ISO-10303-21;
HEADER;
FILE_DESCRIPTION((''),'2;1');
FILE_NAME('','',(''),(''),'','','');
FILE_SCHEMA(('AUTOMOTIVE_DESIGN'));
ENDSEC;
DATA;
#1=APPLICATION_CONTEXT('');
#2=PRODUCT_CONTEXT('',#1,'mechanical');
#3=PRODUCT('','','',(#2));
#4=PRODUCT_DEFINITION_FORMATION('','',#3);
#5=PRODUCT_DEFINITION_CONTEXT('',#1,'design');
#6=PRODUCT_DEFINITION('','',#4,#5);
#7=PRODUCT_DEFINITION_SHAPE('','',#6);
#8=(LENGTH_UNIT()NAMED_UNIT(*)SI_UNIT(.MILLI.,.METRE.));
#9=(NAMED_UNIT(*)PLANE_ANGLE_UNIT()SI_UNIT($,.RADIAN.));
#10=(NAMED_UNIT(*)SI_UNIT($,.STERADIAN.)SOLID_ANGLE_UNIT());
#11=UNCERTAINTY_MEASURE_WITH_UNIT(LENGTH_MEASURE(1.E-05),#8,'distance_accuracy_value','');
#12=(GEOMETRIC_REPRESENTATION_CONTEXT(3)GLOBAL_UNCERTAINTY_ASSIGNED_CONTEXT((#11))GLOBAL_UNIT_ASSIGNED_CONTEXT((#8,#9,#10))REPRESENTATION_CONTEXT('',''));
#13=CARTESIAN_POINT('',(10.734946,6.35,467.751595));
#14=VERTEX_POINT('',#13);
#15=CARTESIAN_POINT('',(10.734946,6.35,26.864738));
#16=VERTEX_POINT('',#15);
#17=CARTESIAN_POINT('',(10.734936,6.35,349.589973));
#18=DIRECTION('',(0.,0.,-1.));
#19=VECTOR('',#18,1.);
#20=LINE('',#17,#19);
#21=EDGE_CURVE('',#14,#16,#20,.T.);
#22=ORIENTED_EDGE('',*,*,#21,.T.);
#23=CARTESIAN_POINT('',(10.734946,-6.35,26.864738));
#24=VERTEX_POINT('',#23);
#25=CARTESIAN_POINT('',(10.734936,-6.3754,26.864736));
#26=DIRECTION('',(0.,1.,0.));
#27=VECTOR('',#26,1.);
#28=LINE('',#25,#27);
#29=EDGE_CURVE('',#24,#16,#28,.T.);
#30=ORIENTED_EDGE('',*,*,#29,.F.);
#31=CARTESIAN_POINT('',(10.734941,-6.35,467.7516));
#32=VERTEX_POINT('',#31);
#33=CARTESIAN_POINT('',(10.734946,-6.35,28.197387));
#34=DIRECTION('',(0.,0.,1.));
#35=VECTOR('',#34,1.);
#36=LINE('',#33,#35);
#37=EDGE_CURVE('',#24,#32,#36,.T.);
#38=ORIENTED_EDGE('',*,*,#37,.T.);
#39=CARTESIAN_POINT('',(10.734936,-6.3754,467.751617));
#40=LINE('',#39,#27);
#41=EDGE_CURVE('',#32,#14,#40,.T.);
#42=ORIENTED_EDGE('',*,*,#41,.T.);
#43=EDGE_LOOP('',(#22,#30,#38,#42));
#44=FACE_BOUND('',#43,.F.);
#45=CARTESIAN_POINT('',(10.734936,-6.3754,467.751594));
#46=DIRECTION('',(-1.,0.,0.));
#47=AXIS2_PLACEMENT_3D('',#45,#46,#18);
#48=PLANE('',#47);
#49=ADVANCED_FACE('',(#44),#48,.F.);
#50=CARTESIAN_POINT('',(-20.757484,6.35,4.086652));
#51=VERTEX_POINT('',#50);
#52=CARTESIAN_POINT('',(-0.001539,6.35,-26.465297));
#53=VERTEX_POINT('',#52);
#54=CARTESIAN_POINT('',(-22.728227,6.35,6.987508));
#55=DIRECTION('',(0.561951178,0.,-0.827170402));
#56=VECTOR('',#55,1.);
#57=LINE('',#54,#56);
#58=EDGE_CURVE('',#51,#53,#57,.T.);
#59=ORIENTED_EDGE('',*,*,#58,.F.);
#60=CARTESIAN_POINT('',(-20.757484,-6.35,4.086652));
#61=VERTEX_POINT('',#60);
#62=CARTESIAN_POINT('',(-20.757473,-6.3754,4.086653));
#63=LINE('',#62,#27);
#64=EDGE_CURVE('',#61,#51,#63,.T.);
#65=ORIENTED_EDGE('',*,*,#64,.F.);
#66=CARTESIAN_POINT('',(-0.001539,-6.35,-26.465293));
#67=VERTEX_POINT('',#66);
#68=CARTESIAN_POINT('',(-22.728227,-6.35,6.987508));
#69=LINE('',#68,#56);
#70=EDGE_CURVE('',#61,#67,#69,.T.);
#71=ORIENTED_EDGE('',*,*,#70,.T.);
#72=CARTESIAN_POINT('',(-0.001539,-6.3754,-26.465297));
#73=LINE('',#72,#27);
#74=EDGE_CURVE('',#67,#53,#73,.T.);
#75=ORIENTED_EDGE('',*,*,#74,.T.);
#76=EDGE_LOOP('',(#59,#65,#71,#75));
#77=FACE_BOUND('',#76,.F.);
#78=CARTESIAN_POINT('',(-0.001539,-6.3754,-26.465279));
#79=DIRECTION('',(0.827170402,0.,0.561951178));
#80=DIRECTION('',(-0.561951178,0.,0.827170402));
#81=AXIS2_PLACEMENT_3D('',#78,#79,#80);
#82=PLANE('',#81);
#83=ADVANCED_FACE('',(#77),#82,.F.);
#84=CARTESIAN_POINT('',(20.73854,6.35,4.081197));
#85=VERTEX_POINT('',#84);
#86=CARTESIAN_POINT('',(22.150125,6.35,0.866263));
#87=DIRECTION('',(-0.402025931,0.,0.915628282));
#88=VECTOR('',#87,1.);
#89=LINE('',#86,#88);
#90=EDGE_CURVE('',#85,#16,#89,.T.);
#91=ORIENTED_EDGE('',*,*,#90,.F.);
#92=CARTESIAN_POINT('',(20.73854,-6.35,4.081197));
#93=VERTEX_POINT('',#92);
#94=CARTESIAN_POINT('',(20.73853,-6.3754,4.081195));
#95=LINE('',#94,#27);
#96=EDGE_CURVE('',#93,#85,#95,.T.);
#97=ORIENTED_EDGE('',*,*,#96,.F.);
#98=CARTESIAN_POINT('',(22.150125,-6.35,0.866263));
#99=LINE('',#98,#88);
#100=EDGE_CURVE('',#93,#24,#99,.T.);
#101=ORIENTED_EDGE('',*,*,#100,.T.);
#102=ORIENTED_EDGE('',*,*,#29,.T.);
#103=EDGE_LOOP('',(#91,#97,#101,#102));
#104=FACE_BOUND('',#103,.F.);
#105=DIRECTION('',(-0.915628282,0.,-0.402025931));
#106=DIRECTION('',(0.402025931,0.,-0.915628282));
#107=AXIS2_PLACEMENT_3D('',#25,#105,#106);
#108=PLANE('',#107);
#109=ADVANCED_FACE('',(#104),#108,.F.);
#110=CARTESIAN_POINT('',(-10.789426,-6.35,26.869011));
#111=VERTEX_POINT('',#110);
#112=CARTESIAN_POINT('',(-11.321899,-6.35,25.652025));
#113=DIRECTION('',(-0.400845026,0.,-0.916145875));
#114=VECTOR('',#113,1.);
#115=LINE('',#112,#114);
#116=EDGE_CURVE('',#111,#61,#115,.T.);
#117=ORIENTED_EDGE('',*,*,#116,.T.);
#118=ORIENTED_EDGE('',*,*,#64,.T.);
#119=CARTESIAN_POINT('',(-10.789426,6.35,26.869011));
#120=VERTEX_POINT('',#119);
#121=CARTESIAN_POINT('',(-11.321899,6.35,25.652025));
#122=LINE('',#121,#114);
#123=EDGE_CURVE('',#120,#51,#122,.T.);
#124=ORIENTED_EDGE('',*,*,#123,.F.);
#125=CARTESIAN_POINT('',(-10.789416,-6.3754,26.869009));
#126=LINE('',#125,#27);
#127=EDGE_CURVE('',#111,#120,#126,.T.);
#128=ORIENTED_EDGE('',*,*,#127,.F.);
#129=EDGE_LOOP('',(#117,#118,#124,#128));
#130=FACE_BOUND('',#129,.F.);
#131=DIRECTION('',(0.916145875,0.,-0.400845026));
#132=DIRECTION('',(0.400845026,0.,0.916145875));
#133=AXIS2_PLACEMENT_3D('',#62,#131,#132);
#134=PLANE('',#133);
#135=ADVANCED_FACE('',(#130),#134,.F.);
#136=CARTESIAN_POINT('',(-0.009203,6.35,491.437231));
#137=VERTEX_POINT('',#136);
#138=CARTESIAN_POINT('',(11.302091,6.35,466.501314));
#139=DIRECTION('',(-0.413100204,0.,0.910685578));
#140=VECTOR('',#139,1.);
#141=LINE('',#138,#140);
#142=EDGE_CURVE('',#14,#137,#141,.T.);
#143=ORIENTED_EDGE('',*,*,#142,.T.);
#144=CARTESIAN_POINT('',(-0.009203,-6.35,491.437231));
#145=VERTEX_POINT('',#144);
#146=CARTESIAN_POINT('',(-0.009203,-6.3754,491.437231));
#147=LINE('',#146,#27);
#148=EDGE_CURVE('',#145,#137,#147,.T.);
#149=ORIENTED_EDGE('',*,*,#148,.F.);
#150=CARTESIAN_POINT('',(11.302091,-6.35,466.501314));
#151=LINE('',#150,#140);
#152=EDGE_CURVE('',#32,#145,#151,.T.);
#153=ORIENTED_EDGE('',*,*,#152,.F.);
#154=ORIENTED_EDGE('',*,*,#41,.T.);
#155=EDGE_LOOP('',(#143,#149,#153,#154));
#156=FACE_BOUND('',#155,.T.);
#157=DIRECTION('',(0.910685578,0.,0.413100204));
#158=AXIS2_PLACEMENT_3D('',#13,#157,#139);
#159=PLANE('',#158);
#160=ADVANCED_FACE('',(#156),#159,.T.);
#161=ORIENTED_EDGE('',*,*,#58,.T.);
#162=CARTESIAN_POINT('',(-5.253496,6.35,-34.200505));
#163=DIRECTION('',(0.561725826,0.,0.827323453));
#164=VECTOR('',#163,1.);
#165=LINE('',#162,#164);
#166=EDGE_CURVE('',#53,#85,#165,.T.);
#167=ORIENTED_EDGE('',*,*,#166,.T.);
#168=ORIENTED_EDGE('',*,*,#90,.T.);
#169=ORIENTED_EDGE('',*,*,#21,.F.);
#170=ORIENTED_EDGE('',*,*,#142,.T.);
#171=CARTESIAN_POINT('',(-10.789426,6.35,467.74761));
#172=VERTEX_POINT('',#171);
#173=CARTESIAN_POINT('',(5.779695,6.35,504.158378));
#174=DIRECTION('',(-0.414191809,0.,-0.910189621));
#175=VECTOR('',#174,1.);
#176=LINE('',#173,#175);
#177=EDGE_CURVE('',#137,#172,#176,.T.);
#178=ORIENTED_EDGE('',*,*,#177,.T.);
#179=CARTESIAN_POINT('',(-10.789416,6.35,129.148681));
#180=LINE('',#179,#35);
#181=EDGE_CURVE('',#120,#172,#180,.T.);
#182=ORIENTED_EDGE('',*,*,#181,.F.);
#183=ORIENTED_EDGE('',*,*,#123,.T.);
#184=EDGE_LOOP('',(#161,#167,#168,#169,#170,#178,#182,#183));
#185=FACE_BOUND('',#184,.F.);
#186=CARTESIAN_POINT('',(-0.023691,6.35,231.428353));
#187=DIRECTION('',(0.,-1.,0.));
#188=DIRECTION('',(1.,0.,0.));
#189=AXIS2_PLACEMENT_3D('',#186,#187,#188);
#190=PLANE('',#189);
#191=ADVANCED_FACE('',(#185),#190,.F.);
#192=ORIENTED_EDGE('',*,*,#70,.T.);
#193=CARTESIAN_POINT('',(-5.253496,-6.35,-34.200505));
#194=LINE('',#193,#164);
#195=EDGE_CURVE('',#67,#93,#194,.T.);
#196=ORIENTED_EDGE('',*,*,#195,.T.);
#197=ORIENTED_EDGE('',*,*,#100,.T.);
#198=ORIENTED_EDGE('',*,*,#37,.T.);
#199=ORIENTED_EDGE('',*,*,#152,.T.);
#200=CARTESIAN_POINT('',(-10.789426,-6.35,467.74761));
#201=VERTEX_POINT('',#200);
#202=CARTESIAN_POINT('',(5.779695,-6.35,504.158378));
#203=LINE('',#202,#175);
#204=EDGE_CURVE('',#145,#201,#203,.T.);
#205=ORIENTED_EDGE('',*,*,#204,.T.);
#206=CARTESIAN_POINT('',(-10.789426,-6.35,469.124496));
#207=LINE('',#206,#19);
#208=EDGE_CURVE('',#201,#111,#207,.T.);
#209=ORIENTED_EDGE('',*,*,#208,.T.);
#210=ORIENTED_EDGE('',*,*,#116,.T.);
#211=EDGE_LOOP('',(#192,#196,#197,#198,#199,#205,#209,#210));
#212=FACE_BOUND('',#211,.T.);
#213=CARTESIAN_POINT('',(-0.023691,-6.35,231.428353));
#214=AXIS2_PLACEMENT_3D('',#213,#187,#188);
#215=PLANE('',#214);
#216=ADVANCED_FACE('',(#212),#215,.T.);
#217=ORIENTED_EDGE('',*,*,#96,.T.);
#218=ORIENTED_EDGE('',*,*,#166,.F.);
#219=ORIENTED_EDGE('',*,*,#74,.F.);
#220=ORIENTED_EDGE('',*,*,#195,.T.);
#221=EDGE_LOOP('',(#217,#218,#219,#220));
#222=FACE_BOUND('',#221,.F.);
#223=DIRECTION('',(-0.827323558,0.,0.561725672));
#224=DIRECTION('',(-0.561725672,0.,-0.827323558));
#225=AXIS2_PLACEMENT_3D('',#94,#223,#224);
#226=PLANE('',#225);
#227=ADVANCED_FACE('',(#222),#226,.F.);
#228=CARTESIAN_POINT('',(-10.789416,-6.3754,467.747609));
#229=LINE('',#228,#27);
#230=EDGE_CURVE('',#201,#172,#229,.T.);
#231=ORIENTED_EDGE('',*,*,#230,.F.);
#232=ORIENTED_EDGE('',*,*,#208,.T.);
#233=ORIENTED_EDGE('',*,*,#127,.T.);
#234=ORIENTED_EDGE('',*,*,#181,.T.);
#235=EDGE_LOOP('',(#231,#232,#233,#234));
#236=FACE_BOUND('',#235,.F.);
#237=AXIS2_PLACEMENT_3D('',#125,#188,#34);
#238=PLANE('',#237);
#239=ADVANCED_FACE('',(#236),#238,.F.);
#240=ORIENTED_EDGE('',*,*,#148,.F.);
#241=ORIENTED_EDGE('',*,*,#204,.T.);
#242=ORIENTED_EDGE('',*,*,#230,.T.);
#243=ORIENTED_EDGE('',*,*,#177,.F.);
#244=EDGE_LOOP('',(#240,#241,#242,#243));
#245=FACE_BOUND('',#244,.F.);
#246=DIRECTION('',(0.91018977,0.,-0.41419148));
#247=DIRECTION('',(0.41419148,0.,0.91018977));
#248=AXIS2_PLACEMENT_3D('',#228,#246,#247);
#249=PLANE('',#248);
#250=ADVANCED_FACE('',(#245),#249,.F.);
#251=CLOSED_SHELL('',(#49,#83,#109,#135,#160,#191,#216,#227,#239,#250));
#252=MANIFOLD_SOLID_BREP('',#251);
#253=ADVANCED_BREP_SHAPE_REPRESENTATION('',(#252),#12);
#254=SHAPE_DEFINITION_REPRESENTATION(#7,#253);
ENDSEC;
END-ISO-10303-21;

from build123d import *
from build123d import SkipClean  # not in build123d's __all__

# Parameters (mm, degrees)
F1_DEPTH = 6.35
F2_DEPTH = 6.35
F3_SIZE2 = 6.34999
F3_SIZE  = 6.34999
F4_DEPTH = 0.0254
F5_DEPTH = 0.0254
F7_DEPTH = 25.4
F8_DEPTH = 0.0254
F9_DEPTH = 0.0254


# Not quite as in the source:
# - a fillet or chamfer is up to 0.001 mm smaller than in the source, because OpenCascade refuses the exact size
# - ends of sketch curves that miss each other by under 0.0002 mm in the source are joined


with BuildPart() as f1:
    # F0 (on Front) → F1 (new body)
    with BuildSketch(Plane.XZ):
        Polygon((-17.139416188, 28.1973872334), (-27.9807504267, 3.4191238228), (0, -37.7674587071), (27.964355424, 3.4191238228), (17.08493568, 28.1973872334), (17.08493568, 469.1244959831), (0, 506.7884922028), (-17.139416188, 469.1244959831), align=None)
    extrude(amount=F1_DEPTH)

    # F2 (add): a face of the model
    f2_faces = [f1.faces().sort_by_distance(p)[0] for p in [
        (-0.0248835797, 0, 225.9211420486),
    ]]
    extrude(f2_faces, amount=F2_DEPTH)

    # F3 (size 6.35 and 6.35 in the source; OpenCascade refuses exactly that, so slightly less here)
    f3_edges = [f1.edges().sort_by_distance(p)[0] for p in [
        (-22.560083, -6.35, 15.808256),
        (-13.990375, -6.35, -17.174167),
        (13.982178, -6.35, -17.174167),
        (22.524646, -6.35, 15.808256),
        (17.084936, -6.35, 248.660942),
        (8.542468, -6.35, 487.956494),
        (-8.569708, -6.35, 487.956494),
        (-17.139416, -6.35, 248.660942),
        (-22.560083, 6.35, 15.808256),
        (-13.990375, 6.35, -17.174167),
        (13.982178, 6.35, -17.174167),
        (22.524646, 6.35, 15.808256),
        (17.084936, 6.35, 248.660942),
        (8.542468, 6.35, 487.956494),
        (-8.569708, 6.35, 487.956494),
        (-17.139416, 6.35, 248.660942),
    ]]
    chamfer(f3_edges, length=F3_SIZE, length2=F3_SIZE2)

    # F4 (add): a face of the model
    f4_faces = [f1.faces().sort_by_distance(p)[0] for p in [
        (-0.0252861091, -6.35, 223.0026633937),
    ]]
    extrude(f4_faces, amount=F4_DEPTH)

    # F5 (add): a face of the model
    f5_faces = [f1.faces().sort_by_distance(p)[0] for p in [
        (-0.0252861091, 6.35, 223.0026633937),
    ]]
    extrude(f5_faces, amount=F5_DEPTH)

    # F6 (on face) → F7 (cut)
    with BuildSketch(Plane.XZ.offset(6.3754)):
        Polygon((10.73493568, 467.7515936734), (10.73493568, 99.0661755204), (32.7086560428, 99.0661755204), (32.7086560428, 505.495429039), (10.73493568, 505.495429039), (10.73493568, 501.6054906496), (19.4450523704, 491.0283088684), (13.1097852611, 474.0980863571), (20.738528953, 474.0980863571), (20.738528953, 467.7515928086), align=None)
        Polygon((32.7086560428, 99.0661755204), (10.73493568, 99.0661755204), (10.73493568, 29.554810375), (20.738528953, 31.6301956773), (21.6034320424, 29.554810375), (32.7086560428, 29.554810375), align=None)
        Polygon((20.738528953, 31.6301956773), (10.73493568, 29.554810375), (21.6034320424, 29.554810375), align=None)
        Polygon((21.6034320424, 29.554810375), (10.73493568, 29.554810375), (10.73493568, 26.8647358603), (20.738530435, 4.0811948515), (27.3526439581, -1.5923568075), (32.2193913162, 4.0811982268), align=None)
        Polygon((-0.0092029974, 491.4372314137), (10.73494568, 467.7515949707), (10.73493568, 474.0980863571), (10.73493568, 501.6054906496), (0, 514.6415233612), (-11.796230803, 486.6769015789), (-10.789416188, 486.6769015789), (-10.789416188, 467.7476089999), align=None)
        Polygon((13.1097852611, 474.0980863571), (10.73493568, 467.7515928086), (20.738528953, 467.7515928086), (20.738528953, 474.0980863571), align=None)
        Polygon((10.73493568, 474.0980863571), (10.73493568, 467.7515936734), (13.1097852611, 474.0980863571), align=None)
        Polygon((10.73493568, 501.6054906496), (10.73493568, 474.0980863571), (13.1097852611, 474.0980863571), (19.4450523704, 491.0283088684), align=None)
        Polygon((27.3526439581, -1.5923568075), (20.738528953, 4.0811982268), (24.6255261009, -4.7715753101), align=None)
        Polygon((24.6255261009, -4.7715753101), (20.738530435, 4.0811948515), (-0.0015394217, -26.4652965043), (0, -41.624262929), (29.7397422671, -3.639997893), (27.3526439581, -1.5923568075), align=None)
        Polygon((-16.2565966219, 476.1029779911), (-10.789416188, 467.7476075543), (-10.789416188, 486.6769015789), (-11.796230803, 486.6769015789), align=None)
        Polygon((-10.789416188, 26.8690092904), (-10.789416188, 467.7476089999), (-16.2565966219, 476.1029779911), (-11.796230803, 486.6769015789), (-21.7237770557, 486.6769015789), (-21.7237770557, 26.8690092904), (-20.8278130876, 26.8690092904), (-18.3457657695, 33.1129990518), align=None)
        Polygon((0, -41.624262929), (-0.0015394241, -26.4652787056), (-20.7574730934, 4.0866529625), (-30.316057774, 2.9998017031), align=None)
        Polygon((-20.8278130876, 26.8690092904), (-10.789416188, 26.8690092904), (-18.3457657695, 33.1129990518), align=None)
        Polygon((-20.7574730934, 4.0866529625), (-10.789416188, 26.8690092904), (-20.8278130876, 26.8690092904), (-30.316057774, 2.9998017031), align=None)
    with SkipClean():  # cleaning this boolean's faces spoils the solid; the shape is the same uncleaned
        extrude(amount=-F7_DEPTH, mode=Mode.SUBTRACT)

    # F8 (cut): a face of the model
    f8_faces = [f1.faces().sort_by_distance(p)[0] for p in [
        (-0.0252861091, -6.3754, 223.0026633937),
    ]]
    extrude(f8_faces, amount=-F8_DEPTH, mode=Mode.SUBTRACT)

    # F9 (cut): a face of the model
    f9_faces = [f1.faces().sort_by_distance(p)[0] for p in [
        (-0.0252864299, 6.3754, 223.0026587516),
    ]]
    extrude(f9_faces, amount=-F9_DEPTH, mode=Mode.SUBTRACT)


solid = f1.part
